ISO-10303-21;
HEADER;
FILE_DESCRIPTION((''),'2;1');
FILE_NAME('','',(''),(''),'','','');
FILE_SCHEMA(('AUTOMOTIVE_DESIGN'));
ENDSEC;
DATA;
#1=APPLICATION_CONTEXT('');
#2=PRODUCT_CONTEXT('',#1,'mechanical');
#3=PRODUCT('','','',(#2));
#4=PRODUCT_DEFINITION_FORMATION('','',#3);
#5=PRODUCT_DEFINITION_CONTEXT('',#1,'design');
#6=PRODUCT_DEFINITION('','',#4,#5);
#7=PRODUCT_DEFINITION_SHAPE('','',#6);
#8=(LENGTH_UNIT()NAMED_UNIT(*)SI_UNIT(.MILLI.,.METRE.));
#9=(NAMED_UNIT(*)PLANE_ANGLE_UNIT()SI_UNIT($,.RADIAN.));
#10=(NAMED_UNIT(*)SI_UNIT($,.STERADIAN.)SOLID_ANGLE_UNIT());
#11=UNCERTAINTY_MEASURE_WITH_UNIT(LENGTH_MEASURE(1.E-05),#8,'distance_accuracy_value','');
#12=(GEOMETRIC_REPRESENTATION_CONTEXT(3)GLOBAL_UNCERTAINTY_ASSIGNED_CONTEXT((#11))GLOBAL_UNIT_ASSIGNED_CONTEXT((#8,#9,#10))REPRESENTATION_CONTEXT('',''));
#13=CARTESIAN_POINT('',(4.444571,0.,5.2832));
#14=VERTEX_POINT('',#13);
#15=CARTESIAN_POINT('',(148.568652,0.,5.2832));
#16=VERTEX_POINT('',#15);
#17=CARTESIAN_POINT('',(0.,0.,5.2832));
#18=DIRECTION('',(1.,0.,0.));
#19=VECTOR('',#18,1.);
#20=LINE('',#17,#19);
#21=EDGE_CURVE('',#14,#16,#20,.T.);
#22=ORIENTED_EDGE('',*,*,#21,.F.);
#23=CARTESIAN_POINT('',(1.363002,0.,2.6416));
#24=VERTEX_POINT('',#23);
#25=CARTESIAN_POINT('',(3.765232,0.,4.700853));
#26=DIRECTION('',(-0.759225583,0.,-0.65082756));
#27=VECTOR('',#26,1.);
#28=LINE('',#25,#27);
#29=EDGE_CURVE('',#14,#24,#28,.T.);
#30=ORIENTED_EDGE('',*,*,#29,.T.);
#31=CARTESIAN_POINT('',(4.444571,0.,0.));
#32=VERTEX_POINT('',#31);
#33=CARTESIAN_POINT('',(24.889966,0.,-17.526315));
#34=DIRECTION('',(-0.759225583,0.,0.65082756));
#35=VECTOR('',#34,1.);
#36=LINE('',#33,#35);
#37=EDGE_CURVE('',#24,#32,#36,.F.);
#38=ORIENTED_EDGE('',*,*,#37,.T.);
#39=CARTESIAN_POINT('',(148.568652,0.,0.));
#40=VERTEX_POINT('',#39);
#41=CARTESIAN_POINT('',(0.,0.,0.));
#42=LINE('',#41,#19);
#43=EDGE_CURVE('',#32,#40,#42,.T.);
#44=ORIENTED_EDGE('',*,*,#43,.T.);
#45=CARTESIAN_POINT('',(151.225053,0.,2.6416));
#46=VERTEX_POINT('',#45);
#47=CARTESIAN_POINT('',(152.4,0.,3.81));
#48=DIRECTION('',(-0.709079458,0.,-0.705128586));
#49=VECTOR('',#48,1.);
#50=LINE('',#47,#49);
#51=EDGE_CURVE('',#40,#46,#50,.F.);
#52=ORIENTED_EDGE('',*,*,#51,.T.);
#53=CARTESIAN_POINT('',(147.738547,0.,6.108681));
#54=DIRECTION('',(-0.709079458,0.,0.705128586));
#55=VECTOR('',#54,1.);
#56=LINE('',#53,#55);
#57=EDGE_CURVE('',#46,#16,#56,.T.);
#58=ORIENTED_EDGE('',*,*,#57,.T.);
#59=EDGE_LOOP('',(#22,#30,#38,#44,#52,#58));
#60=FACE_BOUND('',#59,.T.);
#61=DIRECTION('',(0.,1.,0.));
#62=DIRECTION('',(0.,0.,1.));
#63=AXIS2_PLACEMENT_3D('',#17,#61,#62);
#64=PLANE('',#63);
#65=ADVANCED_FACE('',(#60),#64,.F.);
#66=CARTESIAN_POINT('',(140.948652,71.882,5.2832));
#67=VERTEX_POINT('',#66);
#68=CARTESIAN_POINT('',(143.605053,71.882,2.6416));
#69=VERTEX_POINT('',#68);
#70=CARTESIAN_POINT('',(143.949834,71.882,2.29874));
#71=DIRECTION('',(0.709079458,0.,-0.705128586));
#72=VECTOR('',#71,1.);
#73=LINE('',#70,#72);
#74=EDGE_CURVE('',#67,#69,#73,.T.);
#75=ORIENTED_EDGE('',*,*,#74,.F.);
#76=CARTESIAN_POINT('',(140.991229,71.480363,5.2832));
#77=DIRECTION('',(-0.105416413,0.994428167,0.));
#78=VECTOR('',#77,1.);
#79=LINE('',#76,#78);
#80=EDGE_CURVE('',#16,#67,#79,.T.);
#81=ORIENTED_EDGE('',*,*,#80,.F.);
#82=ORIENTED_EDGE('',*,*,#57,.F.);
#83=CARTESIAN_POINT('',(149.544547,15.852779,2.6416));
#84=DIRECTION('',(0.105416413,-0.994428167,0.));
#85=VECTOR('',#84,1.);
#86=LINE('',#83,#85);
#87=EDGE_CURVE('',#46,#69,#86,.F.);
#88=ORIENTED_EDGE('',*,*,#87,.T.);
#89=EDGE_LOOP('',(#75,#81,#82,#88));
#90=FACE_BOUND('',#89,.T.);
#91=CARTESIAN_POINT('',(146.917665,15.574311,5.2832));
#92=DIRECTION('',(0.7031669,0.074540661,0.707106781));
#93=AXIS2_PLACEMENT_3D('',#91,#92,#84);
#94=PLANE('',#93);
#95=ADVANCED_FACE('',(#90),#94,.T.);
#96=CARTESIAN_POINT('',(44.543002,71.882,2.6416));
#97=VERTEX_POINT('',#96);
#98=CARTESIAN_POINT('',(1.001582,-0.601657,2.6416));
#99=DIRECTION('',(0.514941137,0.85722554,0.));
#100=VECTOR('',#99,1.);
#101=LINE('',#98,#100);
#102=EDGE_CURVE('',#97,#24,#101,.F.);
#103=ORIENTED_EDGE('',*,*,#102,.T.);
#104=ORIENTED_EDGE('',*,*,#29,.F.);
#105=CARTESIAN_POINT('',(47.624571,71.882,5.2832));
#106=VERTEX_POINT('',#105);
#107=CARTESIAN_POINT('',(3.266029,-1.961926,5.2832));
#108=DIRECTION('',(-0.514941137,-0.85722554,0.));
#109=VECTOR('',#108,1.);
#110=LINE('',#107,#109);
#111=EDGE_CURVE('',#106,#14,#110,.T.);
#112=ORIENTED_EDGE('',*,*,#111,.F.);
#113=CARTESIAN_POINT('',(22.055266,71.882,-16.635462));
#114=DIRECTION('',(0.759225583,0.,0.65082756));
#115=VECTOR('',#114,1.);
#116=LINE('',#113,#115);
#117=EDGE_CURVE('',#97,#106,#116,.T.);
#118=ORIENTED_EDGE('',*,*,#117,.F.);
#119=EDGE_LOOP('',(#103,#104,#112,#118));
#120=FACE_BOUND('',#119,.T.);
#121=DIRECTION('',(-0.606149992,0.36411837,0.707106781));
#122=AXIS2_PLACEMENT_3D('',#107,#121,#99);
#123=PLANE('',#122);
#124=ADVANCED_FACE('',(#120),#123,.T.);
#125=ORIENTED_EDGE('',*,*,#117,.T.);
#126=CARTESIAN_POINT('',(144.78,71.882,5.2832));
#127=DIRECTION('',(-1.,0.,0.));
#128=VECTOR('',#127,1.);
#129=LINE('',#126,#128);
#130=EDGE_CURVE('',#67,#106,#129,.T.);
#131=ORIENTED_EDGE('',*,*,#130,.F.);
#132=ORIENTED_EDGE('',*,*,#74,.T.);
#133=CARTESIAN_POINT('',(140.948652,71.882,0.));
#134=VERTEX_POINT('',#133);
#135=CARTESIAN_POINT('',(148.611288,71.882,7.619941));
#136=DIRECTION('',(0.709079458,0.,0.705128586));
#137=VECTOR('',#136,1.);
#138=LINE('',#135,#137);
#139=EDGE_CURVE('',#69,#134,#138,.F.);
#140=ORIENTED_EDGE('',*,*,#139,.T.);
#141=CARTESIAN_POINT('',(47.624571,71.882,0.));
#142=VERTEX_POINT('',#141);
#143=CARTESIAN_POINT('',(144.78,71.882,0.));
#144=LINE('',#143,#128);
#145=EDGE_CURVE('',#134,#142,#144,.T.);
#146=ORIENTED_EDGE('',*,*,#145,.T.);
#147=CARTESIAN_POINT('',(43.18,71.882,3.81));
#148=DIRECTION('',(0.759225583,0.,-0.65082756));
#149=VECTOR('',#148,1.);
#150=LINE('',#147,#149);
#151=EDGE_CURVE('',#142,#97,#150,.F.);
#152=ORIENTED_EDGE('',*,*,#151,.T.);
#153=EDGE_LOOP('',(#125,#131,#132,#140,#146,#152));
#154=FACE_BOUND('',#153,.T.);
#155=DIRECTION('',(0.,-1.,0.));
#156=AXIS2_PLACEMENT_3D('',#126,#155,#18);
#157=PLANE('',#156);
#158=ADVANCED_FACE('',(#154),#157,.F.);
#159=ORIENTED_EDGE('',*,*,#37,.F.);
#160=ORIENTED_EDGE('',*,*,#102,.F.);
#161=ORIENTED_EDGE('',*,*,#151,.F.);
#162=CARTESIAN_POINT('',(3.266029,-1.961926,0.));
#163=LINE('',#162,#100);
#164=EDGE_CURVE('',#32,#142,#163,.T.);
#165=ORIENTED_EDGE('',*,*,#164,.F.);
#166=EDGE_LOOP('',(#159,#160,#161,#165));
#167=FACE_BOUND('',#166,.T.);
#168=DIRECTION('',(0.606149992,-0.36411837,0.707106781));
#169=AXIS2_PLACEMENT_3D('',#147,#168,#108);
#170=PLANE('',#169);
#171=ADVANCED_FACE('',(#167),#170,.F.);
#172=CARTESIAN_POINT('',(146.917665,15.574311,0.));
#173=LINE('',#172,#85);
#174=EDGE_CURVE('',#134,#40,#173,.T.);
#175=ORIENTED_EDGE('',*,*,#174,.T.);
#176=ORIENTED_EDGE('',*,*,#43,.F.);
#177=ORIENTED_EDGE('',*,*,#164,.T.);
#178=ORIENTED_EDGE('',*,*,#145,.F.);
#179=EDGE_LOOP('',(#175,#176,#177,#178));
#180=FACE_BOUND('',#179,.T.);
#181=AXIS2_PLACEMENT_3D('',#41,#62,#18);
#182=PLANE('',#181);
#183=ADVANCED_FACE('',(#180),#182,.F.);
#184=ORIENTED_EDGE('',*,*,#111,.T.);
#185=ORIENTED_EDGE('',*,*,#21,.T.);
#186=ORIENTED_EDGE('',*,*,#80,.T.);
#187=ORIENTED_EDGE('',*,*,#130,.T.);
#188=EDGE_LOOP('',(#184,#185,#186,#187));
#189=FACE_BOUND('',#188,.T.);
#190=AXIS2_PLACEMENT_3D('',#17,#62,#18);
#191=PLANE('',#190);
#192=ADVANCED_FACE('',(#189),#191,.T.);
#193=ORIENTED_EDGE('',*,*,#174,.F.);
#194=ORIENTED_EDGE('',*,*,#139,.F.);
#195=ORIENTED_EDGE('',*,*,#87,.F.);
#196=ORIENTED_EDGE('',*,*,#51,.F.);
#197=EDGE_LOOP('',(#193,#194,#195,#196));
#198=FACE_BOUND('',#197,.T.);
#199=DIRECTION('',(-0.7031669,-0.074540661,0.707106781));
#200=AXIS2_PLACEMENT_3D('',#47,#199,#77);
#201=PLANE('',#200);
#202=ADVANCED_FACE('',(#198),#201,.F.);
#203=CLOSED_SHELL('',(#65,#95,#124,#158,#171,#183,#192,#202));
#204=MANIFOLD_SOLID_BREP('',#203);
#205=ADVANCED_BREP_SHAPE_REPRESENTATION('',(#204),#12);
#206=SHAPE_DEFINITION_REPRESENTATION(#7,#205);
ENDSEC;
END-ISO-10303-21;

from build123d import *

# Parameters (mm, degrees)
BOSS_EXTRUDE1_DEPTH = 5.2832
CHAMFER3_SIZE       = 3.81


with BuildPart() as part:
    # Sketch2 → Boss-Extrude1 (new body)
    with BuildSketch(Plane.XY):
        Polygon((0, 0), (152.4, 0), (144.78, 71.882), (43.18, 71.882), align=None)
    extrude(amount=BOSS_EXTRUDE1_DEPTH)

    # Chamfer3
    # the kernel refuses this chamfer: 3.81 mm, written as the material it takes off along each edge
    with BuildSketch(Plane(origin=(153.432881845, -9.743518742, 5.2832), x_dir=(0.027342674184069608, 0.002898516697957921, -0.9996219169112969), z_dir=(-0.10541641348659767, 0.9944281672235671, 0))) as chamfer3_piece_1:
        Polygon((CHAMFER3_SIZE * 0.999621916911, CHAMFER3_SIZE * 0.0274958766106), (-CHAMFER3_SIZE * 0.0274958766106, CHAMFER3_SIZE * 0.999621916911), (0, 0), align=None)
    extrude(amount=91.880982955, mode=Mode.SUBTRACT)
    with BuildSketch(Plane(origin=(153.432881845, -9.743518742, 0), x_dir=(0.027342674184069608, 0.002898516697957921, 0.9996219169112969), z_dir=(-0.10541641348659767, 0.9944281672235671, 0))) as chamfer3_piece_2:
        Polygon((CHAMFER3_SIZE * 0.999621916911, -CHAMFER3_SIZE * 0.0274958766106), (-CHAMFER3_SIZE * 0.0274958766106, -CHAMFER3_SIZE * 0.999621916911), (0, 0), align=None)
    extrude(amount=91.880982955, mode=Mode.SUBTRACT)
    with BuildSketch(Plane(origin=(48.225451027, 80.281192003, 5.2832), x_dir=(-0.023570167662218693, 0.014158757959636668, -0.9996219169112966), z_dir=(-0.514941136817021, -0.8572255395248057, 0))) as chamfer3_piece_3:
        Polygon((CHAMFER3_SIZE * 0.999621916911, CHAMFER3_SIZE * 0.0274958766106), (-CHAMFER3_SIZE * 0.0274958766106, CHAMFER3_SIZE * 0.999621916911), (0, 0), align=None)
    extrude(amount=103.450468888, mode=Mode.SUBTRACT)
    with BuildSketch(Plane(origin=(48.225451027, 80.281192003, 0), x_dir=(-0.023570167662218693, 0.014158757959636668, 0.9996219169112966), z_dir=(-0.514941136817021, -0.8572255395248057, 0))) as chamfer3_piece_4:
        Polygon((CHAMFER3_SIZE * 0.999621916911, -CHAMFER3_SIZE * 0.0274958766106), (-CHAMFER3_SIZE * 0.0274958766106, -CHAMFER3_SIZE * 0.999621916911), (0, 0), align=None)
    extrude(amount=103.450468888, mode=Mode.SUBTRACT)


solid = part.part
